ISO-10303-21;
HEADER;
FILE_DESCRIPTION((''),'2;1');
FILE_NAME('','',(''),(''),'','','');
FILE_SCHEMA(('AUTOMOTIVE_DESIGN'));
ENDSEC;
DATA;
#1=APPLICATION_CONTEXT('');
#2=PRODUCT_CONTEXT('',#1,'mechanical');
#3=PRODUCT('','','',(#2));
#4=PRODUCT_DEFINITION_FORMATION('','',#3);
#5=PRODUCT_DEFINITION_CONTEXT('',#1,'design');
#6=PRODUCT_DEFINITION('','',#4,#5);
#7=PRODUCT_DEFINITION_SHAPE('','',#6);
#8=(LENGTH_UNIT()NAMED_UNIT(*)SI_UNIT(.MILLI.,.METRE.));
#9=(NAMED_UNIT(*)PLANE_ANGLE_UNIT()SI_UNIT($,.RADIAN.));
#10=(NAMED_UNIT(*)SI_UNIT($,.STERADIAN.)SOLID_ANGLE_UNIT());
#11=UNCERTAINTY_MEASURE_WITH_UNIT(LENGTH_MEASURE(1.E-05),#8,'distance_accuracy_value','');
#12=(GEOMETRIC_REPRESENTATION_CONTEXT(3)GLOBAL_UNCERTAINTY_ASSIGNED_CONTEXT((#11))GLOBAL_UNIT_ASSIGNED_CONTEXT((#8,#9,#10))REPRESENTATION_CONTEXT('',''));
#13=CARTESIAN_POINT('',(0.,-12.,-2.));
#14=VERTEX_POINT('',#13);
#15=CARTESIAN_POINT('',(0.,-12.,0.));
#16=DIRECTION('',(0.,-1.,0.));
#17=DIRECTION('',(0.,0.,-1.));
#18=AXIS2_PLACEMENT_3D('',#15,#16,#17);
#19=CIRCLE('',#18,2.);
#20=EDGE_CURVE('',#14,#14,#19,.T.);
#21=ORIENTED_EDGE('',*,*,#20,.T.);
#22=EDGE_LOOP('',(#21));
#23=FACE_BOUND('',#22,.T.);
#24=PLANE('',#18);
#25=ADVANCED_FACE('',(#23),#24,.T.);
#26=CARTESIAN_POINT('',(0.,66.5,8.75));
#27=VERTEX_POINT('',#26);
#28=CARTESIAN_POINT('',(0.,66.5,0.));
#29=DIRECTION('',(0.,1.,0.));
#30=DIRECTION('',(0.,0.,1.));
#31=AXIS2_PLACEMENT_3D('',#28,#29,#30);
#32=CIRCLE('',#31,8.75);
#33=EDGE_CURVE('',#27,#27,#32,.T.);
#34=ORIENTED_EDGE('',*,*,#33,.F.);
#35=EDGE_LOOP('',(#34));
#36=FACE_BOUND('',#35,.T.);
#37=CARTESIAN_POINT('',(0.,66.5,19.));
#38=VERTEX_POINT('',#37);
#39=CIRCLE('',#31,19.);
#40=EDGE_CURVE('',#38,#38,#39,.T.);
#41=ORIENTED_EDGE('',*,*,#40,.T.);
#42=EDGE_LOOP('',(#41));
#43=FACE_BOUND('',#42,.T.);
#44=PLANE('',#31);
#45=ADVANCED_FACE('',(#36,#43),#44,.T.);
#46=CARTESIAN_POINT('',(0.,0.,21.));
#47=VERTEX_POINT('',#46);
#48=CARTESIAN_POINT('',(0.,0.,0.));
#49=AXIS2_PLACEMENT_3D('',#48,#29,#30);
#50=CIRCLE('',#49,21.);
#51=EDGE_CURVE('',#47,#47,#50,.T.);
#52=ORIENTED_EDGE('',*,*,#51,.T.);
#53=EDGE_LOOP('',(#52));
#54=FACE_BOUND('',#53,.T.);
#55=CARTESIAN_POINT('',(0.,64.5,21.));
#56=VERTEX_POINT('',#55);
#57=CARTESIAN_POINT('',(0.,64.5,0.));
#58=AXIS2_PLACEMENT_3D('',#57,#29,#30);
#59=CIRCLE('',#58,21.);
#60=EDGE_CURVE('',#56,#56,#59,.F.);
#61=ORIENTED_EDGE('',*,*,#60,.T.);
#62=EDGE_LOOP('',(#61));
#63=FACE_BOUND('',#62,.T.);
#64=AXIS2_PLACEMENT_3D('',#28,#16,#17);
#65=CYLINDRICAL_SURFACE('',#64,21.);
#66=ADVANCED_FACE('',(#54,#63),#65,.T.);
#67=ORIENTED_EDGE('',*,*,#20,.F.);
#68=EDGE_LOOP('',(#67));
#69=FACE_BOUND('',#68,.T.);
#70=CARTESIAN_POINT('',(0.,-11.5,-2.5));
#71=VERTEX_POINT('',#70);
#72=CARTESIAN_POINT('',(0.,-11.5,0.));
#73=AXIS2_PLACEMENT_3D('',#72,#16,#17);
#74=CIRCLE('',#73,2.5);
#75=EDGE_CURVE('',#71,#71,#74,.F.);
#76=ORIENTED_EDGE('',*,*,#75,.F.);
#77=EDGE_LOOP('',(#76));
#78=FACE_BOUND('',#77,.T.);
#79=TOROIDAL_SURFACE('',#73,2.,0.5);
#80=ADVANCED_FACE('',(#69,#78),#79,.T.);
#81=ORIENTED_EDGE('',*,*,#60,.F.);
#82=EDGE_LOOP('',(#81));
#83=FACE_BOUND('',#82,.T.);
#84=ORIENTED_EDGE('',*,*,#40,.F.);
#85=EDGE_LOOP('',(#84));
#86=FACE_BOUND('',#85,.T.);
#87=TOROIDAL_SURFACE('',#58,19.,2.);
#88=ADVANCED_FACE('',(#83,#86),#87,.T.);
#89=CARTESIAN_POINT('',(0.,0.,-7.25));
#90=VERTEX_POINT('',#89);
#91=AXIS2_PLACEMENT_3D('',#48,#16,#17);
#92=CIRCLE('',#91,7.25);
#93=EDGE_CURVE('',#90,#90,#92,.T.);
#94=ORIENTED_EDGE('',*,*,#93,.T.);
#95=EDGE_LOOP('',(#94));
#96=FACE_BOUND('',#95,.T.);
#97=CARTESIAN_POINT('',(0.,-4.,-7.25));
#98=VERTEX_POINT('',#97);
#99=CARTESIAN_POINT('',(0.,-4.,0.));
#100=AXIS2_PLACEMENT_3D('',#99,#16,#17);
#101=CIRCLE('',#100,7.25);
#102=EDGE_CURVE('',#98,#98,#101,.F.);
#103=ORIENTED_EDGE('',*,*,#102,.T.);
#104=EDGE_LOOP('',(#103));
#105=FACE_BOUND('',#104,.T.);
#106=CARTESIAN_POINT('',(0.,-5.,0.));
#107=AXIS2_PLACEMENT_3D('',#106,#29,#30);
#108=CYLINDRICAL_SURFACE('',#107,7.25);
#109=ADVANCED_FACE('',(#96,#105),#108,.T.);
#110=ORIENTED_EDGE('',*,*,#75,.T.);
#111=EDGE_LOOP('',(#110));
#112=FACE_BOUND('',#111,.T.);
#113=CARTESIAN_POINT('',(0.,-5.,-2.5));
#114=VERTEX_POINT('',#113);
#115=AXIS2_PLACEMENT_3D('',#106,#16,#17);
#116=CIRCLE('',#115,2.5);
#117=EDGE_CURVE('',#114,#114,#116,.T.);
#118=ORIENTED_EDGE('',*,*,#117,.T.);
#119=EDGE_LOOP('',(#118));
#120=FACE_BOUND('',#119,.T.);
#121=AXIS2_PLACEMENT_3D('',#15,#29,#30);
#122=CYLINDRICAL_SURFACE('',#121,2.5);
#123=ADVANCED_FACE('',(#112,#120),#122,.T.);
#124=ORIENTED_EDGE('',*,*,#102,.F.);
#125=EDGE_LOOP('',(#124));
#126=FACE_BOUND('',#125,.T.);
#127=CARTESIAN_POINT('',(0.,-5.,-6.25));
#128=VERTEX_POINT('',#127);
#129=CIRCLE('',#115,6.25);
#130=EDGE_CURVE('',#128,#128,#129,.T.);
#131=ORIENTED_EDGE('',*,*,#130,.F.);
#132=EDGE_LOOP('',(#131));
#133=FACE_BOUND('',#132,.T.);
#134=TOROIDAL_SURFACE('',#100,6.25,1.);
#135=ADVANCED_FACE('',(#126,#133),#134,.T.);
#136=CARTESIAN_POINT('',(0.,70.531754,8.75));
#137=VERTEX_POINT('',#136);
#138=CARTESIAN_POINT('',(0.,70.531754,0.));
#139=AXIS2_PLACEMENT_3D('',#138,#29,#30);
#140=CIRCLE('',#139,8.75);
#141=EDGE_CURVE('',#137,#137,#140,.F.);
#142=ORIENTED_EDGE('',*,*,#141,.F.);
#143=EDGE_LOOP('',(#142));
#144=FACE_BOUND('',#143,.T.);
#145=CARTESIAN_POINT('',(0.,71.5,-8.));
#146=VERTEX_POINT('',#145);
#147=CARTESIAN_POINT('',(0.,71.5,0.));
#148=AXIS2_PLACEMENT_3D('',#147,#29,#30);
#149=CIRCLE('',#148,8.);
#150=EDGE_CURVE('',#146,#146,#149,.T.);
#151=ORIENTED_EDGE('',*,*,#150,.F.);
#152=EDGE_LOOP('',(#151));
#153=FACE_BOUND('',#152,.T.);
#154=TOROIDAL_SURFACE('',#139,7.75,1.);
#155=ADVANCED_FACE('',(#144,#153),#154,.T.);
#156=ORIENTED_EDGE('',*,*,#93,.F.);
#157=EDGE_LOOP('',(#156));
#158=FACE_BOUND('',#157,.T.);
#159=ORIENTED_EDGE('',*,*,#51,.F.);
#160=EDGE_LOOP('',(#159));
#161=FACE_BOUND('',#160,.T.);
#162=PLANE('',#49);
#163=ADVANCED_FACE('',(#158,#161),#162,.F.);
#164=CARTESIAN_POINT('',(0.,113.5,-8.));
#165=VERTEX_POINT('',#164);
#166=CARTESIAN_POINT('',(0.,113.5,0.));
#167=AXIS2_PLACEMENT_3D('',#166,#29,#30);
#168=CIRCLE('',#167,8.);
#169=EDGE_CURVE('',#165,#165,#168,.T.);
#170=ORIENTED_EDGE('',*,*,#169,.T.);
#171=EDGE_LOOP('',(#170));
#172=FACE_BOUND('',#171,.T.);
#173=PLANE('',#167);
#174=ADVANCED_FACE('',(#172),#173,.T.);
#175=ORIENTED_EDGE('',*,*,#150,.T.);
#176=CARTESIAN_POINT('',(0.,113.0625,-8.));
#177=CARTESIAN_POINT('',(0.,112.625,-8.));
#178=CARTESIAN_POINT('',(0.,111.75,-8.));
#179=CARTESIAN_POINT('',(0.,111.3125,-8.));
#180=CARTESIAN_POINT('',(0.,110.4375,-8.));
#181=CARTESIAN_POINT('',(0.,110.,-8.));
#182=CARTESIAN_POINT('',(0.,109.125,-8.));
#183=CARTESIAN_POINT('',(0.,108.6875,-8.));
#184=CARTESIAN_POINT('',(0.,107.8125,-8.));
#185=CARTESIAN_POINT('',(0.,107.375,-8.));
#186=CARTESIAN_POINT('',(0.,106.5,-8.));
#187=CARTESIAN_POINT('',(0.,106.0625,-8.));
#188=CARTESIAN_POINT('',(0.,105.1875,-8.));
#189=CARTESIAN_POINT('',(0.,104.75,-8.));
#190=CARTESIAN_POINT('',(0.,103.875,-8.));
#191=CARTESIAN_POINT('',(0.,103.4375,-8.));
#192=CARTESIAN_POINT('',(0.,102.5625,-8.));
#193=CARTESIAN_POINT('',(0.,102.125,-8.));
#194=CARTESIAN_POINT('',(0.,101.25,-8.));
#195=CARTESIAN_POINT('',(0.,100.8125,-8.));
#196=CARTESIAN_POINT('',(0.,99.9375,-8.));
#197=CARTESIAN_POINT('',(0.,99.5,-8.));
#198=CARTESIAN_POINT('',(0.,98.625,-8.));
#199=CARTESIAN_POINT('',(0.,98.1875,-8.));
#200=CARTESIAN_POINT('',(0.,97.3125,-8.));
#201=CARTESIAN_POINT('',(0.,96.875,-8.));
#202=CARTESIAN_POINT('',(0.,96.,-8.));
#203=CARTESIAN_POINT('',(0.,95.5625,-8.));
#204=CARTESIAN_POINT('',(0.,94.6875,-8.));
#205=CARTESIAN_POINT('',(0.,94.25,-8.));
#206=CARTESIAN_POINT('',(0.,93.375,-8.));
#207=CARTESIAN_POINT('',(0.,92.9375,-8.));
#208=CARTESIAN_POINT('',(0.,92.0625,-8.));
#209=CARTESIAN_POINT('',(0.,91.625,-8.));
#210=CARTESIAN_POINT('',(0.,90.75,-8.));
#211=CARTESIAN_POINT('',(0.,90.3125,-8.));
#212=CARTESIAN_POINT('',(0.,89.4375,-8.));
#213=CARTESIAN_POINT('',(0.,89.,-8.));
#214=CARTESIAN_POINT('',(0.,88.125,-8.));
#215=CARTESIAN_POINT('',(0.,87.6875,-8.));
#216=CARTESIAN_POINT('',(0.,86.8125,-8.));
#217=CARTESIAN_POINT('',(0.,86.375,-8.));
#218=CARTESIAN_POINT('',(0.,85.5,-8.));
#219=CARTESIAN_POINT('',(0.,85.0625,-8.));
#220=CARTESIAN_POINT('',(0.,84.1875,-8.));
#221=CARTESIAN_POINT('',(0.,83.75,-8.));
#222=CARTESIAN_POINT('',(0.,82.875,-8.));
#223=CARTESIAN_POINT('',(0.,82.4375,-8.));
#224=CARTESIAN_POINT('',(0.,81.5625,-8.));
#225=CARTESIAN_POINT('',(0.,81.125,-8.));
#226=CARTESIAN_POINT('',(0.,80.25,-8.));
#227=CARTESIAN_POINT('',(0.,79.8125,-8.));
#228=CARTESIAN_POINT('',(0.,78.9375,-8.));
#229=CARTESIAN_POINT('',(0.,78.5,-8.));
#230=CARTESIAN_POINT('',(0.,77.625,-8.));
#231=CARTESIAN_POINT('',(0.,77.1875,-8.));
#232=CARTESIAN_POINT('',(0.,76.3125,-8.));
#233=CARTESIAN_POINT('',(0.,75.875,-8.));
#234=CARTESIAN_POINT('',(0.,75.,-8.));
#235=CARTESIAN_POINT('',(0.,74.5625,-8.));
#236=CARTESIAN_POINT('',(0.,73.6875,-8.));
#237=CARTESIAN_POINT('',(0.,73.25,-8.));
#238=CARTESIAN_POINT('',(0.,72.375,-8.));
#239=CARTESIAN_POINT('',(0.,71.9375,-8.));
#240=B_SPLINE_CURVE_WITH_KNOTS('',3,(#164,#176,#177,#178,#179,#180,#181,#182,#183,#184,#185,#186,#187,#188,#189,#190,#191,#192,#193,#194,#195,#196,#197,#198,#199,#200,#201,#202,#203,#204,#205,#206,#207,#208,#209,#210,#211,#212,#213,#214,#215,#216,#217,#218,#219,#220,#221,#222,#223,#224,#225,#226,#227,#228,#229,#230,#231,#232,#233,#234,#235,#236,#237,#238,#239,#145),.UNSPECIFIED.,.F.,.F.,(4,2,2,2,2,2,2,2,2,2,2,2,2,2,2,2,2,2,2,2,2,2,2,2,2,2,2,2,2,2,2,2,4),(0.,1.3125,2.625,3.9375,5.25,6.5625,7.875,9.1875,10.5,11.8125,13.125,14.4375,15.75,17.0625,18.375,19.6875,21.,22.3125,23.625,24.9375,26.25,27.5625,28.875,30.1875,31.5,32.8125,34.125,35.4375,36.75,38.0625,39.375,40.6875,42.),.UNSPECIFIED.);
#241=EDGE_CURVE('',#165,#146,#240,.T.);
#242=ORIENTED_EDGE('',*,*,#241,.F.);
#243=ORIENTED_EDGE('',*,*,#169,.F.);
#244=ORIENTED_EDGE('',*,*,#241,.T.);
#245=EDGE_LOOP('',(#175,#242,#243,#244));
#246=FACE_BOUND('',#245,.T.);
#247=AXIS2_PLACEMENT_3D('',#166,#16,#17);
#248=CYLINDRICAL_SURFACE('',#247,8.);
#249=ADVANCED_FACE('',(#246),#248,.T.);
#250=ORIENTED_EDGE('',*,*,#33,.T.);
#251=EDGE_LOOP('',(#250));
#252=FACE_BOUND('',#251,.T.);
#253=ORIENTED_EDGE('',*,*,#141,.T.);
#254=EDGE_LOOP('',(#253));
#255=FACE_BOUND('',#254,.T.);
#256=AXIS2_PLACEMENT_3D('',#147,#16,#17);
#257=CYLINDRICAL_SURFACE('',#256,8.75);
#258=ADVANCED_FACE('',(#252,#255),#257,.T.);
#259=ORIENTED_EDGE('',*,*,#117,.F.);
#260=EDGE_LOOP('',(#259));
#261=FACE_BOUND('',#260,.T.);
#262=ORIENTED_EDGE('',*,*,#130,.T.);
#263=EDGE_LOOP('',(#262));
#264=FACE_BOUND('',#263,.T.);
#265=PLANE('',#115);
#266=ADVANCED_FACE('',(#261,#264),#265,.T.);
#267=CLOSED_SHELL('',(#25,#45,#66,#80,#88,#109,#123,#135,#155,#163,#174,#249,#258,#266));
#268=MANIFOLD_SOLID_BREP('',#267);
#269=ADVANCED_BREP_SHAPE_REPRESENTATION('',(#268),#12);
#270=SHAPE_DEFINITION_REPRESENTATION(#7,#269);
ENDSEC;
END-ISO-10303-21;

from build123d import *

# Parameters (mm, degrees)
SKETCH1_R           = 21
BOSS_EXTRUDE1_DEPTH = 66.5
SKETCH3_R           = 8.75
BOSS_EXTRUDE2_DEPTH = 5
FILLET1_R           = 2
SKETCH4_R           = 8
BOSS_EXTRUDE3_DEPTH = 42
SKETCH5_R           = 7.25
BOSS_EXTRUDE4_DEPTH = 5
FILLET2_R           = 1
SKETCH6_R           = 2.5
BOSS_EXTRUDE5_DEPTH = 7
FILLET3_R           = 0.5


with BuildPart() as part:
    # Sketch1 → Boss-Extrude1 (new body)
    with BuildSketch(Plane(origin=(0, 0, 0), x_dir=(1, 0, 0), z_dir=(0, 1, 0))):
        with Locations(Location((0, 0, 0), (0, 0, 270))):
            Circle(SKETCH1_R)
    extrude(amount=BOSS_EXTRUDE1_DEPTH)

    # Sketch3 → Boss-Extrude2 (add)
    with BuildSketch(Plane(origin=(0, 66.5, 0), x_dir=(1, 0, 0), z_dir=(0, 1, 0))):
        with Locations(Location((0, 0, 0), (0, 0, 270))):
            Circle(SKETCH3_R)
    extrude(amount=BOSS_EXTRUDE2_DEPTH)

    # Fillet1
    fillet1_edges = [part.edges().sort_by_distance(p)[0] for p in [
        (0, 66.5, -21),
    ]]
    fillet(fillet1_edges, radius=FILLET1_R)

    # Sketch4 → Boss-Extrude3 (add)
    with BuildSketch(Plane(origin=(0, 71.5, 0), x_dir=(1, 0, 0), z_dir=(0, 1, 0))):
        with Locations(Location((0, 0, 0), (0, 0, 90))):
            Circle(SKETCH4_R)
    extrude(amount=BOSS_EXTRUDE3_DEPTH)

    # Sketch5 → Boss-Extrude4 (add)
    with BuildSketch(Plane.XZ):
        with Locations(Location((0, 0, 0), (0, 0, 270))):
            Circle(SKETCH5_R)
    extrude(amount=BOSS_EXTRUDE4_DEPTH)

    # Fillet2
    # the kernel refuses this fillet: 1 mm, written as the material it takes off along each edge
    with BuildSketch(Plane(origin=(0, -5, 0), x_dir=(0, 0, -1), z_dir=(-1, 0, 0))) as fillet2_piece_1:
        with BuildLine():
            CenterArc((7.25 - FILLET2_R, -FILLET2_R), FILLET2_R, 0, 90)
            Line((7.25 - FILLET2_R, 0), (7.25 - FILLET2_R, FILLET2_R * 0.02))
            Line((7.25 - FILLET2_R, FILLET2_R * 0.02), (7.25 + FILLET2_R * 0.02, FILLET2_R * 0.02))
            Line((7.25 + FILLET2_R * 0.02, FILLET2_R * 0.02), (7.25 + FILLET2_R * 0.02, -FILLET2_R))
            Line((7.25 + FILLET2_R * 0.02, -FILLET2_R), (7.25, -FILLET2_R))
        make_face()
    revolve(axis=Axis((0, -5, 0), (0, -1, 0)), mode=Mode.SUBTRACT)
    with BuildSketch(Plane(origin=(0, 71.5, 0), x_dir=(0, 0, 1), z_dir=(-1, 0, 0))) as fillet2_piece_2:
        with BuildLine():
            CenterArc((7.75, -0.968245837), FILLET2_R, 0, 75.522487814)
            Line((8, 0), (8.005, 0.019364917))
            ThreePointArc((8.005, 0.019364917), (8.375, 0.02), (8.75, 0.02))
            Line((8.75, 0.02), (8.77, 0))
            Line((8.77, 0), (8.77, -0.968245837))
            Line((8.77, -0.968245837), (8.75, -0.968245837))
        make_face()
    revolve(axis=Axis((0, 71.5, 0), (0, 1, 0)), mode=Mode.SUBTRACT)

    # Sketch6 → Boss-Extrude5 (add)
    with BuildSketch(Plane.XZ.offset(5)):
        with Locations(Location((0, 0, 0), (0, 0, 270))):
            Circle(SKETCH6_R)
    extrude(amount=BOSS_EXTRUDE5_DEPTH)

    # Fillet3
    fillet3_edges = [part.edges().sort_by_distance(p)[0] for p in [
        (0, -12, 2.5),
    ]]
    fillet(fillet3_edges, radius=FILLET3_R)


solid = part.part
